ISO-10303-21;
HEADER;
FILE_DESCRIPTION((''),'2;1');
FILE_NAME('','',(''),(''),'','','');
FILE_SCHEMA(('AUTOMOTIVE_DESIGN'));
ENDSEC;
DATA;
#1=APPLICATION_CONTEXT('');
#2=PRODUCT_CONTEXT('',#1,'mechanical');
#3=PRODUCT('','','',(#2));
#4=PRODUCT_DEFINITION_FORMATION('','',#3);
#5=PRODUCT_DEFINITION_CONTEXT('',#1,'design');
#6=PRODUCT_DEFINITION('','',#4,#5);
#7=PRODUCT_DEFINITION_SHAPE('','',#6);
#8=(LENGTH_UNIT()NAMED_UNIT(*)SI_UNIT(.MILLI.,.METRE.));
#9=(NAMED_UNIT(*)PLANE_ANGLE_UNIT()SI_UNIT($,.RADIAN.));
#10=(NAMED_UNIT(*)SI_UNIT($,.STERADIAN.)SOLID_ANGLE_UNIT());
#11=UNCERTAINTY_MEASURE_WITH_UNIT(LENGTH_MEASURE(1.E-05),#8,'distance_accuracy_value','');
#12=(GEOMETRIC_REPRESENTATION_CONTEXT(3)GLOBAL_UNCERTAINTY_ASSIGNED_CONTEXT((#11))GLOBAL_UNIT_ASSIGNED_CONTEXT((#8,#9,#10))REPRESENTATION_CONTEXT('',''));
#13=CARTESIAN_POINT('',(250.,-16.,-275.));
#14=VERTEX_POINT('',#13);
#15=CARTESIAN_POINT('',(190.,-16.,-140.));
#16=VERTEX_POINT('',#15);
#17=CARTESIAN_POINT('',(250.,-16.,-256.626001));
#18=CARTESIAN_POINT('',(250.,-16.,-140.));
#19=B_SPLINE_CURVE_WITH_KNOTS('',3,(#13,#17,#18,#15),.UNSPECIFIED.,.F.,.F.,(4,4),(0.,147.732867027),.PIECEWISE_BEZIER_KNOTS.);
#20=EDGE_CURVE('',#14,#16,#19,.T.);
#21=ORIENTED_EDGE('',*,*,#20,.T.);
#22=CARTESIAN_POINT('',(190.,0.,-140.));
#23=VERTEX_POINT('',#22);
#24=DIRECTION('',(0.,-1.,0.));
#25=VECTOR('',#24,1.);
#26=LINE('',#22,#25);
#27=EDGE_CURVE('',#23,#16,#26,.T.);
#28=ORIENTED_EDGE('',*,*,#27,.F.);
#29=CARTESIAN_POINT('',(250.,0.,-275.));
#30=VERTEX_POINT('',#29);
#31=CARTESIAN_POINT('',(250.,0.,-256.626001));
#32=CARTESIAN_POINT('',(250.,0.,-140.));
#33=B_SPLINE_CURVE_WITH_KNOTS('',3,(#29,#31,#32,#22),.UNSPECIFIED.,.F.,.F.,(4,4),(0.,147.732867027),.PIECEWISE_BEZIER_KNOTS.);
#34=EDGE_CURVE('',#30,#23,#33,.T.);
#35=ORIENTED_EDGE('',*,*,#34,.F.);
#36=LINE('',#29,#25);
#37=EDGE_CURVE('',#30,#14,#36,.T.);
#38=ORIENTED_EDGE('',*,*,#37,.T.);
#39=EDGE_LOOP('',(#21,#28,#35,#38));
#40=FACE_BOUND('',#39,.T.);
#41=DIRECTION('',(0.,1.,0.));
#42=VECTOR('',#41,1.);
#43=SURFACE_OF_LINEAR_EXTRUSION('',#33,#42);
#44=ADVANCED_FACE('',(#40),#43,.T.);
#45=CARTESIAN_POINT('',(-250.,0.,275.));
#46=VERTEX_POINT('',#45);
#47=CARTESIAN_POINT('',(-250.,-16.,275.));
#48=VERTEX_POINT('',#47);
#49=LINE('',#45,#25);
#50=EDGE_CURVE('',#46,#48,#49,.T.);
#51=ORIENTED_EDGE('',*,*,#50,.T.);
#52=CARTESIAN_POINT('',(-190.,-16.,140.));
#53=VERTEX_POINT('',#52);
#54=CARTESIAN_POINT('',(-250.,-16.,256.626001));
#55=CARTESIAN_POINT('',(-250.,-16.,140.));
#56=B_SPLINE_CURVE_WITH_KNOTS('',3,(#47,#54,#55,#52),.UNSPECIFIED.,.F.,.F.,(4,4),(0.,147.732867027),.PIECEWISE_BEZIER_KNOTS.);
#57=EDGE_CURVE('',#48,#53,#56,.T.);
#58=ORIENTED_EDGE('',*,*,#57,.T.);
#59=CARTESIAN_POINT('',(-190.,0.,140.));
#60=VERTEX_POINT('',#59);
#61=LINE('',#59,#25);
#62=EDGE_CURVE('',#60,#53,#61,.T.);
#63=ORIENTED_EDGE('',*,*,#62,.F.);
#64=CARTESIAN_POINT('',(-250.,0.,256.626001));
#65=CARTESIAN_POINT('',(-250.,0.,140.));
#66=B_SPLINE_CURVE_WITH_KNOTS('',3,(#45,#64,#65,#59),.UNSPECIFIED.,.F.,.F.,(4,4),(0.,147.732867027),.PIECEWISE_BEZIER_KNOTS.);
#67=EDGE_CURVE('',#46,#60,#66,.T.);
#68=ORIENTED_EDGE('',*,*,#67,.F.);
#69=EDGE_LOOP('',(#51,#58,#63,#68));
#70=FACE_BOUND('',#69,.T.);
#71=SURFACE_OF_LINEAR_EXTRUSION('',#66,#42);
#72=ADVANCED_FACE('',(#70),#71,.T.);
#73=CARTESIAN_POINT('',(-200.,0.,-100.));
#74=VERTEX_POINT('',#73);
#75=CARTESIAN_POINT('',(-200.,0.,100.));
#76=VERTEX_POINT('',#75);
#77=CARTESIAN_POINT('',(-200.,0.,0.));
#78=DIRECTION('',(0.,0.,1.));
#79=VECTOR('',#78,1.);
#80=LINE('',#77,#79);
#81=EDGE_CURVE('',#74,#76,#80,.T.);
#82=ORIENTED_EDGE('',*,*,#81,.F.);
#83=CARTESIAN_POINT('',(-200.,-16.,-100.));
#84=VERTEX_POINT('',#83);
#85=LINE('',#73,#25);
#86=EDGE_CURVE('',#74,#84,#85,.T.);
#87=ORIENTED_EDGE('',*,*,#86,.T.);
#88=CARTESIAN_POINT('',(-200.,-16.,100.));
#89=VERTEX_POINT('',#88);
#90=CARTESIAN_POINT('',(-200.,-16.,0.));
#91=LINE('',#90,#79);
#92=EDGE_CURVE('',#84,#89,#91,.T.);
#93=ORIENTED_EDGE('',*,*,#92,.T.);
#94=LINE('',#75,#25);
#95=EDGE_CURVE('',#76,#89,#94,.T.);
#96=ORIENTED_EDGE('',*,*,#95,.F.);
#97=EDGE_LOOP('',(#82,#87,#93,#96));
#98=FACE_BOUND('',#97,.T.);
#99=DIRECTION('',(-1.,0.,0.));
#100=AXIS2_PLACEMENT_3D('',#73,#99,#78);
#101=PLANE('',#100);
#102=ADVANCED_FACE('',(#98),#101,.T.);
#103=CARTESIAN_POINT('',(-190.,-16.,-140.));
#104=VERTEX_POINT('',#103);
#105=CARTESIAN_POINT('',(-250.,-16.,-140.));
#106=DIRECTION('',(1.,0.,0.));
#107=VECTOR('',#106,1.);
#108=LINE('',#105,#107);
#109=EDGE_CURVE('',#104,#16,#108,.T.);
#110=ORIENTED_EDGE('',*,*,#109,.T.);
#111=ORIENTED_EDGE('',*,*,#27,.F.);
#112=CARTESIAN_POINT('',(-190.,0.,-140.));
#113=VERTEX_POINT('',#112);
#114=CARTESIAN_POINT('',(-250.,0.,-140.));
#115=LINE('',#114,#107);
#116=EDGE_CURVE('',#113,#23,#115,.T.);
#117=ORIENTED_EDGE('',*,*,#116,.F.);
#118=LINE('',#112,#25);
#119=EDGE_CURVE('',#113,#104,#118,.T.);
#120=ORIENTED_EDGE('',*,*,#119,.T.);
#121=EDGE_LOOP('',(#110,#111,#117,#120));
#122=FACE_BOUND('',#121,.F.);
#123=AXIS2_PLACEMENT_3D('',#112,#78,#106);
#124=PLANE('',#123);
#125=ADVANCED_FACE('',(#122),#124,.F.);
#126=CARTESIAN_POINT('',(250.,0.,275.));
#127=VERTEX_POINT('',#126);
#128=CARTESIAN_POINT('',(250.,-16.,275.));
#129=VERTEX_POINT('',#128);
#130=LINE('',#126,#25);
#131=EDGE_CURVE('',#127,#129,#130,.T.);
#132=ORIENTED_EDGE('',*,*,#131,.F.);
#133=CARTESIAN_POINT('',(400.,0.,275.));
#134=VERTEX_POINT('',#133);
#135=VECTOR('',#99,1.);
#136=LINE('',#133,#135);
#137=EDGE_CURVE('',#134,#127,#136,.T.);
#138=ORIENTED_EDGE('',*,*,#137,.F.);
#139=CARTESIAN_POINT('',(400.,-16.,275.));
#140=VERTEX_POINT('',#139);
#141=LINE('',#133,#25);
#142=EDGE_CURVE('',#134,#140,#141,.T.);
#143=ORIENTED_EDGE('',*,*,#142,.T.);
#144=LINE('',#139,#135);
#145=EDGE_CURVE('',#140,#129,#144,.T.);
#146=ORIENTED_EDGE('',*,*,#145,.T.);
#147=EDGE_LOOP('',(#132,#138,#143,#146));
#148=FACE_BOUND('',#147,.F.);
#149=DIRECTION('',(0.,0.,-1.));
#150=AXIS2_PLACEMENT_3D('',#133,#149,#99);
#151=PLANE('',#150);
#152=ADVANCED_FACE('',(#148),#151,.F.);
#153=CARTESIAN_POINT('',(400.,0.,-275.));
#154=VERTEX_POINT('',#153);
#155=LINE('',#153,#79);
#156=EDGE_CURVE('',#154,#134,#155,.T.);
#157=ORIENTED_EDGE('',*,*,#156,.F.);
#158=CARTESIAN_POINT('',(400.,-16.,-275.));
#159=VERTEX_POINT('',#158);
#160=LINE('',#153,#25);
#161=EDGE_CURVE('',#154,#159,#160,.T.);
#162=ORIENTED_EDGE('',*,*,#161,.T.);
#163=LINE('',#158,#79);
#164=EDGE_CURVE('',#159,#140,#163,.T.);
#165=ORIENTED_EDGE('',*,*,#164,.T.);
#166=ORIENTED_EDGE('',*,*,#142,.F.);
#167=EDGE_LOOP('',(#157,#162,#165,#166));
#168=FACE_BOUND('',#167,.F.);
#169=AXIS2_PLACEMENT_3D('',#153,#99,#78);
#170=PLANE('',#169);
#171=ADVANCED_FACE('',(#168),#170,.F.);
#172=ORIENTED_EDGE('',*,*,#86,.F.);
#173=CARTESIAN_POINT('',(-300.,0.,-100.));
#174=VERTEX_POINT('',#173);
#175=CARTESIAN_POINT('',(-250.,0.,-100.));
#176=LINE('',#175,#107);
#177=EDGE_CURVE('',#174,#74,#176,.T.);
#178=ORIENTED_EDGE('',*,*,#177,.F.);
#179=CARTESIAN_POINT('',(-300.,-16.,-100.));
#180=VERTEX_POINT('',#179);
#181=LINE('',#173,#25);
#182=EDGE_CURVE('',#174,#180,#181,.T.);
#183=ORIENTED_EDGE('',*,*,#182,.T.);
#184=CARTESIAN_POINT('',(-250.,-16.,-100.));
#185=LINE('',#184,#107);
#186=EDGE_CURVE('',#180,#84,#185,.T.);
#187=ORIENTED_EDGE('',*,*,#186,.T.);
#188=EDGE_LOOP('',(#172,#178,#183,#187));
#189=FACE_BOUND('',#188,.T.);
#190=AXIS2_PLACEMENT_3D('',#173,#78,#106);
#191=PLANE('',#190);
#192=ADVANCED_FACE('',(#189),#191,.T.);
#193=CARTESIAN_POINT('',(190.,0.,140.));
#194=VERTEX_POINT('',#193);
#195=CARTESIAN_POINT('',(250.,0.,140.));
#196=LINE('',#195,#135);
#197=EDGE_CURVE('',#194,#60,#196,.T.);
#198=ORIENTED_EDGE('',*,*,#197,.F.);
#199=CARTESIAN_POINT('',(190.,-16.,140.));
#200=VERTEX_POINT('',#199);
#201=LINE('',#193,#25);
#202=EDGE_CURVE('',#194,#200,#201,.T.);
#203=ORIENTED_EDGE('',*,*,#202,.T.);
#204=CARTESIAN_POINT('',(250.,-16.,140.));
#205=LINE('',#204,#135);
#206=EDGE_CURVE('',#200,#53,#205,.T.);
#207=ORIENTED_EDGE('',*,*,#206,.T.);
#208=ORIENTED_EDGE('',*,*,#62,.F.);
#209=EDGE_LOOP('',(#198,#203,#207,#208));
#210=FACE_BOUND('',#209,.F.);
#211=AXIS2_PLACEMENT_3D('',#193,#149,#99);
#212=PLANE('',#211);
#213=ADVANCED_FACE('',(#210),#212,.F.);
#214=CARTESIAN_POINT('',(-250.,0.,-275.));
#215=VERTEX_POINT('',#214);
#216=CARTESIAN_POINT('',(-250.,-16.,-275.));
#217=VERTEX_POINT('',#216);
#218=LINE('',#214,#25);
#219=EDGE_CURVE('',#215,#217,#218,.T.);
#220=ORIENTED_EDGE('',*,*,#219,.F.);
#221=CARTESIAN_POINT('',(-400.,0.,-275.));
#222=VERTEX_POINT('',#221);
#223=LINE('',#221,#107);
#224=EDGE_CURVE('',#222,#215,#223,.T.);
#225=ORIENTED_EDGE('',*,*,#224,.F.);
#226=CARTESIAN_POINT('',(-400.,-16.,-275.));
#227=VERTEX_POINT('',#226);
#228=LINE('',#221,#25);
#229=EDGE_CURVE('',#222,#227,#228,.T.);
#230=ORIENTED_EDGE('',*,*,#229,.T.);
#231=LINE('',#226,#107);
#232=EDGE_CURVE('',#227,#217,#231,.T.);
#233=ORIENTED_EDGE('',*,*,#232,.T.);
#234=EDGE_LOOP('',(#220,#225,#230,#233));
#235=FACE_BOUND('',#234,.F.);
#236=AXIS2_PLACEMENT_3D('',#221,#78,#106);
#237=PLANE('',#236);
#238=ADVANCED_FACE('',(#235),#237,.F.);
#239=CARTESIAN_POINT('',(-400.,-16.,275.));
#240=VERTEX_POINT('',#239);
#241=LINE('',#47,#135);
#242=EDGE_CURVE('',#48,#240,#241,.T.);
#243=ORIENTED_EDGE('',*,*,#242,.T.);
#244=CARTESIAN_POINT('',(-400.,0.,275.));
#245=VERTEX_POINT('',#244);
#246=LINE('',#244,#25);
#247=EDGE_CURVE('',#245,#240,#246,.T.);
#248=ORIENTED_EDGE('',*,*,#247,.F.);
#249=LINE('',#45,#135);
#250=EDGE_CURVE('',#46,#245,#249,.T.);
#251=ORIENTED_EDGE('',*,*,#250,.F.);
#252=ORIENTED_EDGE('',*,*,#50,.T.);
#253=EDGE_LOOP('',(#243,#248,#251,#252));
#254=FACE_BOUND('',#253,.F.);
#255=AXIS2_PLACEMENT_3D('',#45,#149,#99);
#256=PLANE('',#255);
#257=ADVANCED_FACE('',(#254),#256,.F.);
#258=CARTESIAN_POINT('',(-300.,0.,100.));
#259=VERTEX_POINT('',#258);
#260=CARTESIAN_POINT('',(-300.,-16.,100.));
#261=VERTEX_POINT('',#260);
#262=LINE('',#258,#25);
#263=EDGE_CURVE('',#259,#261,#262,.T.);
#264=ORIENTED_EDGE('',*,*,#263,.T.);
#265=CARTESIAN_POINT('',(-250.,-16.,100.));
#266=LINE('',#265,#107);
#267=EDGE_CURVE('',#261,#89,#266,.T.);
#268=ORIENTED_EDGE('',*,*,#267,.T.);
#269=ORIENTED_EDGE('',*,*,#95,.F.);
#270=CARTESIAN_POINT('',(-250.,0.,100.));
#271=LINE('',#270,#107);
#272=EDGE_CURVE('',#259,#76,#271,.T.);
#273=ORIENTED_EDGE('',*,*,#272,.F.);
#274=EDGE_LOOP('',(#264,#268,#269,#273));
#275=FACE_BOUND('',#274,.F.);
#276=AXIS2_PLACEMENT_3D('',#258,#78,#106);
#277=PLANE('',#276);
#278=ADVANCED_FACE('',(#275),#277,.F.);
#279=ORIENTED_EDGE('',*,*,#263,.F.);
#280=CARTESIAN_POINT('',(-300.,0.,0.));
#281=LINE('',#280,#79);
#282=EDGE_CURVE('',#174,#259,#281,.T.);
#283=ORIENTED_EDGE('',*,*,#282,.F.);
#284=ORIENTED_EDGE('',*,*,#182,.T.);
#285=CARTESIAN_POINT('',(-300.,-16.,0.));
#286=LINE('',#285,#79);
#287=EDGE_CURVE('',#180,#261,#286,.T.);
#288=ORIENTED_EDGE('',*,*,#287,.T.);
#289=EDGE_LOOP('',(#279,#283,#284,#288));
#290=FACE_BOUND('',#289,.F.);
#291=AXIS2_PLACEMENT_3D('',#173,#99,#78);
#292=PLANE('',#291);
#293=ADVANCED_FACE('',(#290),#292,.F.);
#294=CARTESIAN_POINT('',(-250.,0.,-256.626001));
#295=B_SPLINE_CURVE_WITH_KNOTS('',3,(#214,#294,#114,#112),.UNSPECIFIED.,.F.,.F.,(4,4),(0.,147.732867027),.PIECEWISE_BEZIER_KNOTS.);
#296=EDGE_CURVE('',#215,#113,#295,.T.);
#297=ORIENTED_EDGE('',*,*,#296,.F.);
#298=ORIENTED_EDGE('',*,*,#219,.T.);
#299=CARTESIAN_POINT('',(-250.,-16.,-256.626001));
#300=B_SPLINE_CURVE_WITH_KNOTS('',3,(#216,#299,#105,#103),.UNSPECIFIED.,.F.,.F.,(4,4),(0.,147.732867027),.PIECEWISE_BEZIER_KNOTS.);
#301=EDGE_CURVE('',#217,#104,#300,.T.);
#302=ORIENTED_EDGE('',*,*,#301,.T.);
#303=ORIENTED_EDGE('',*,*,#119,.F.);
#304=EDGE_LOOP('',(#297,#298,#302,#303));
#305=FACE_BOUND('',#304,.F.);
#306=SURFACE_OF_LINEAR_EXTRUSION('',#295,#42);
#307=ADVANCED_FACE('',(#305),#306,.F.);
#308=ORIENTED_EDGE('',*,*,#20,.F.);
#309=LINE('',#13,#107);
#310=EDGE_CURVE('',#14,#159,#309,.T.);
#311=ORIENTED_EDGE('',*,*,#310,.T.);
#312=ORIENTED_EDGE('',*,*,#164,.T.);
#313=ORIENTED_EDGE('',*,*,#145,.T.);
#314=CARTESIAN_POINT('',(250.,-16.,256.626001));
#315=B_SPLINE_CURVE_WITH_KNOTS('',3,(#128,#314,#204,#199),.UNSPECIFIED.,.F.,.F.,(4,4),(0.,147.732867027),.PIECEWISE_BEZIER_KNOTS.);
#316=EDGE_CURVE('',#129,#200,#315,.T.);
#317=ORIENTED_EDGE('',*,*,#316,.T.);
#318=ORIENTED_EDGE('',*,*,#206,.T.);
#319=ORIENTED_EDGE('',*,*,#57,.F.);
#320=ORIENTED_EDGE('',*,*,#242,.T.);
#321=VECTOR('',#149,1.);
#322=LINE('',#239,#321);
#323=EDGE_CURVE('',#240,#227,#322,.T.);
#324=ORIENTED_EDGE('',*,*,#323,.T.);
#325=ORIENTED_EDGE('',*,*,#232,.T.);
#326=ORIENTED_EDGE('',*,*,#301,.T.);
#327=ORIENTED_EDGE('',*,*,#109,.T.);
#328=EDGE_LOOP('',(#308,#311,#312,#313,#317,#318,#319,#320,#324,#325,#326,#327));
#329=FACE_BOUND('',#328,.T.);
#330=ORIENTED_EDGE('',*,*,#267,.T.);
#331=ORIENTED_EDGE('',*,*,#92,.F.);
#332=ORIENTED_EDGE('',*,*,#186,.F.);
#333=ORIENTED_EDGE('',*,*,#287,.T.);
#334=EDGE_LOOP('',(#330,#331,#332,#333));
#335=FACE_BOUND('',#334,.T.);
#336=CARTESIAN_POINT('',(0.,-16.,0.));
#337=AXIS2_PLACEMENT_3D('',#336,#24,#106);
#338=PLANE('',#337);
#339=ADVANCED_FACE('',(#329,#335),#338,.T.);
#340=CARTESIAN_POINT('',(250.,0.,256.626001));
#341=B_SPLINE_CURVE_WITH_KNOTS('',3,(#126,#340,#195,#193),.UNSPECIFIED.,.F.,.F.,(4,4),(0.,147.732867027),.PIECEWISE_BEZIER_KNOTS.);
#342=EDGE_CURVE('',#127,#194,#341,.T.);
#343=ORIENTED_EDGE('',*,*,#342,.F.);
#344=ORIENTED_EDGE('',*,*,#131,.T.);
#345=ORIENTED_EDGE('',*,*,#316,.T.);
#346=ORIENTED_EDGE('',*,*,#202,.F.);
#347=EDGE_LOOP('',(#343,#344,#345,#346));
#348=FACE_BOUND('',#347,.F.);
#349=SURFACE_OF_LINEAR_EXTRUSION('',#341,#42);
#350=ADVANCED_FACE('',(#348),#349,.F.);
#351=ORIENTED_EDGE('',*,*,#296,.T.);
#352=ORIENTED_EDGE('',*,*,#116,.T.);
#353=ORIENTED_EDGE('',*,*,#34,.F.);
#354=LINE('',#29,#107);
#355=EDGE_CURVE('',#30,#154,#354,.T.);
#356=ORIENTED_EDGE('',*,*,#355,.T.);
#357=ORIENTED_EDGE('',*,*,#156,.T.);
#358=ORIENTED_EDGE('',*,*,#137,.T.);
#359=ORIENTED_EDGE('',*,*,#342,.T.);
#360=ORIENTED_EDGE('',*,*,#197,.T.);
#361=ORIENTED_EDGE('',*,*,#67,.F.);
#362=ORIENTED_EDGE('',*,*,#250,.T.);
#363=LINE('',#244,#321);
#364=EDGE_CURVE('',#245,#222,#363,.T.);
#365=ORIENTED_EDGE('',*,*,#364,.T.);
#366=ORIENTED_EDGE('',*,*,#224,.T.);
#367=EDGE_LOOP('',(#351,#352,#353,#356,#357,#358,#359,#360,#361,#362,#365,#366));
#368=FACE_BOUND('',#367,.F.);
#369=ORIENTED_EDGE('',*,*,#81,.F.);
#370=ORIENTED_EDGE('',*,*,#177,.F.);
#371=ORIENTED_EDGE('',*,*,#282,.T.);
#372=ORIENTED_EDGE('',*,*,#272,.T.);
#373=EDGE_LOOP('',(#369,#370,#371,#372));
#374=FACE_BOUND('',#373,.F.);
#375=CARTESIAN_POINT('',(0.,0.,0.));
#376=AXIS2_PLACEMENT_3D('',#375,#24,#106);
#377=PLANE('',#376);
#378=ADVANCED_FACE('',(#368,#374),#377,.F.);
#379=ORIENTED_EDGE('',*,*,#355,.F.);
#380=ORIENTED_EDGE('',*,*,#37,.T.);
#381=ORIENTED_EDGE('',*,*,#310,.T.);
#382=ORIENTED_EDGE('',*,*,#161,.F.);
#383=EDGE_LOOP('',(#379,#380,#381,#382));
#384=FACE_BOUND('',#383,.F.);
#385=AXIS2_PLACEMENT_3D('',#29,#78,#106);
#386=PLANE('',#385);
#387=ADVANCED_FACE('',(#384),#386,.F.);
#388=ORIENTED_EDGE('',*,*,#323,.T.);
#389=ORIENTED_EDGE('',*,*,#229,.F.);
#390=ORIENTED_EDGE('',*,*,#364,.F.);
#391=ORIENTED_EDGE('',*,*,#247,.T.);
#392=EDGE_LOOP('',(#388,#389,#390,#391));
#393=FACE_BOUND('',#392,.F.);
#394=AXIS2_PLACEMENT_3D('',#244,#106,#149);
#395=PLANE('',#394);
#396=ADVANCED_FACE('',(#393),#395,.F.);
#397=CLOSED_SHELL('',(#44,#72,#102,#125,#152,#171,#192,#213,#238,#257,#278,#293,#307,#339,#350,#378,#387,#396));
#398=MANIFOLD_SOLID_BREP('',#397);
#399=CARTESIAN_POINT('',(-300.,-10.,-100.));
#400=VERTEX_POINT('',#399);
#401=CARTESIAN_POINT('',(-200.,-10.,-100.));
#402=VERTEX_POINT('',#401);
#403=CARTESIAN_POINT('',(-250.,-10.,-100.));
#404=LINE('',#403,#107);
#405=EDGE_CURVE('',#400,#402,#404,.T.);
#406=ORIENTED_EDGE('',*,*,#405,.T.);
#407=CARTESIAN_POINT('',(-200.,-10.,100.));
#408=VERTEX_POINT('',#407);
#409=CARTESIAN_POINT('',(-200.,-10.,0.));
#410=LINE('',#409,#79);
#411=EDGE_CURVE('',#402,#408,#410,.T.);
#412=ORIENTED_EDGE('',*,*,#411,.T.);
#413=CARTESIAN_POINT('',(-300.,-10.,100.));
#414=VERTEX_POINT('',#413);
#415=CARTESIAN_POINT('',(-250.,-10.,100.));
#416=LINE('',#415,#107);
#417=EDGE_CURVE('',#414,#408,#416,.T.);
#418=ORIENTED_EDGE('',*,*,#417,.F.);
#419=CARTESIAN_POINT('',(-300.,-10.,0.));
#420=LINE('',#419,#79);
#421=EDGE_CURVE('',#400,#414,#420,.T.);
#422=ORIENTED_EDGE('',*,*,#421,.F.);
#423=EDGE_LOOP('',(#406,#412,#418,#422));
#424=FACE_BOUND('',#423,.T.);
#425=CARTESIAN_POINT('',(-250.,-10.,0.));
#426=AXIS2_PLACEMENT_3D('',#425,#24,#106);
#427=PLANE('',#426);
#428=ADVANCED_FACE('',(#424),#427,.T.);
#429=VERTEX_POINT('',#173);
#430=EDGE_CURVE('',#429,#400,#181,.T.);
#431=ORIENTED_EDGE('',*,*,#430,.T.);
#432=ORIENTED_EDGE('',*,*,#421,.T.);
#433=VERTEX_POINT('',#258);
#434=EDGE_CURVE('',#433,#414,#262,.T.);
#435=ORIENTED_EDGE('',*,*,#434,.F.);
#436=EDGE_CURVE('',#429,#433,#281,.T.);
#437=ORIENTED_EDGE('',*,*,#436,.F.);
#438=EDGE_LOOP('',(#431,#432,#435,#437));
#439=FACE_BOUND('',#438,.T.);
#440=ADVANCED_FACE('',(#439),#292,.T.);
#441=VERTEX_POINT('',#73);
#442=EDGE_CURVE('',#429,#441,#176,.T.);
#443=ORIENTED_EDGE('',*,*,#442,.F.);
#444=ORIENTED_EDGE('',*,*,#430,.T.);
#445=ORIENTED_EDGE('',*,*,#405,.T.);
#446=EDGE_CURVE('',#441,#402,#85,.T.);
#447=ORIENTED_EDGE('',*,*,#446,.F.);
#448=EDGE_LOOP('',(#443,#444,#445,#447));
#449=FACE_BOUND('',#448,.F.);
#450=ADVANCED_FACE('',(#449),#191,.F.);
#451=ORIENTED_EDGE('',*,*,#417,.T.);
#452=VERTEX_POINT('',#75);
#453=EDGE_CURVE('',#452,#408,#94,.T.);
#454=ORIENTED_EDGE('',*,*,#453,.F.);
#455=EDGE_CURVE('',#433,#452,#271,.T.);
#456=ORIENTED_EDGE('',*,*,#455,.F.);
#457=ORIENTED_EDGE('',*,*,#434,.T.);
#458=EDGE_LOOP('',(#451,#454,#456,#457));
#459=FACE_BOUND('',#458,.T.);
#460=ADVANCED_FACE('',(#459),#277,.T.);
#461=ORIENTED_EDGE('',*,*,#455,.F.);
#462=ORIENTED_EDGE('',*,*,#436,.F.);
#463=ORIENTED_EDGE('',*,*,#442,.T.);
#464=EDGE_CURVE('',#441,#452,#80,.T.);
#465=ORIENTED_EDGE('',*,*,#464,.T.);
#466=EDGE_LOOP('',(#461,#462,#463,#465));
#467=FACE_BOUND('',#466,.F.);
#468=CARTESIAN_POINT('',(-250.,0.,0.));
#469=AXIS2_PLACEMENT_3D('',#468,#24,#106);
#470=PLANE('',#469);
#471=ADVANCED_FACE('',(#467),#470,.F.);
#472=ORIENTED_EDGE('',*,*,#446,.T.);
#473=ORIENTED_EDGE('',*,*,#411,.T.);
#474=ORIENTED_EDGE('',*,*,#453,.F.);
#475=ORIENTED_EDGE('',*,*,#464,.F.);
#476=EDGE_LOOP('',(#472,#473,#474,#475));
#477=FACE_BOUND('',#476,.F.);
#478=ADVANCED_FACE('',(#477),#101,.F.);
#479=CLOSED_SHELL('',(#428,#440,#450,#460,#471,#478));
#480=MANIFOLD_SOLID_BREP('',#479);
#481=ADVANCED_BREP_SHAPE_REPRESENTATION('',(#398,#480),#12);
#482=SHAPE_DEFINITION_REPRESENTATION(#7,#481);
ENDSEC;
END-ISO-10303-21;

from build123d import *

# Parameters (mm, degrees)
F0_W     = 100
F0_H     = 200
F1_DEPTH = 16
F2_DEPTH = 10


# Not quite as in the source:
# - a feature names something its author has since deleted; it is built from what else it names


with BuildPart() as f1:
    # F0 (on Front) → F1 (new body)
    with BuildSketch(Plane.XZ):
        Polygon((-250, 275), (-400, 275), (-400, -275), (-250, -275), (-250, -140), (-190, -140), (190, -140), (250, -140), (250, -275), (400, -275), (400, 275), (250, 275), (250, 140), (190, 140), (-190, 140), (-250, 140), align=None)
        with Locations((-250, 0)):
            Rectangle(F0_W, F0_H, mode=Mode.SUBTRACT)
        with BuildLine():
            add(Edge.make_bspline(
                [(-250, 275), (-250, 256.6260014103), (-250, 140), (-190, 140)],
                knots=[0, 0, 0, 0, 147.7328670269, 147.7328670269, 147.7328670269, 147.7328670269], degree=3))
            Line((-250, 275), (-250, 140))
            Line((-250, 140), (-190, 140))
        make_face()
        with BuildLine():
            Line((250, 140), (250, 275))
            add(Edge.make_bspline(
                [(250, 275), (250, 256.6260014103), (250, 140), (190, 140)],
                knots=[0, 0, 0, 0, 147.7328670269, 147.7328670269, 147.7328670269, 147.7328670269], degree=3))
            Line((190, 140), (250, 140))
        make_face()
        with BuildLine():
            Line((-250, -140), (-250, -275))
            add(Edge.make_bspline(
                [(-250, -275), (-250, -256.6260014103), (-250, -140), (-190, -140)],
                knots=[0, 0, 0, 0, 147.7328670269, 147.7328670269, 147.7328670269, 147.7328670269], degree=3))
            Line((-190, -140), (-250, -140))
        make_face()
        with BuildLine():
            add(Edge.make_bspline(
                [(250, -275), (250, -256.6260014103), (250, -140), (190, -140)],
                knots=[0, 0, 0, 0, 147.7328670269, 147.7328670269, 147.7328670269, 147.7328670269], degree=3))
            Line((250, -275), (250, -140))
            Line((250, -140), (190, -140))
        make_face()
    extrude(amount=F1_DEPTH)


with BuildPart() as f2:
    # F0 (on Front) → F2 (new body)
    with BuildSketch(Plane.XZ):
        with Locations((-250, 0)):
            Rectangle(F0_W, F0_H)
    extrude(amount=F2_DEPTH)


solid = Compound([f1.part, f2.part])
